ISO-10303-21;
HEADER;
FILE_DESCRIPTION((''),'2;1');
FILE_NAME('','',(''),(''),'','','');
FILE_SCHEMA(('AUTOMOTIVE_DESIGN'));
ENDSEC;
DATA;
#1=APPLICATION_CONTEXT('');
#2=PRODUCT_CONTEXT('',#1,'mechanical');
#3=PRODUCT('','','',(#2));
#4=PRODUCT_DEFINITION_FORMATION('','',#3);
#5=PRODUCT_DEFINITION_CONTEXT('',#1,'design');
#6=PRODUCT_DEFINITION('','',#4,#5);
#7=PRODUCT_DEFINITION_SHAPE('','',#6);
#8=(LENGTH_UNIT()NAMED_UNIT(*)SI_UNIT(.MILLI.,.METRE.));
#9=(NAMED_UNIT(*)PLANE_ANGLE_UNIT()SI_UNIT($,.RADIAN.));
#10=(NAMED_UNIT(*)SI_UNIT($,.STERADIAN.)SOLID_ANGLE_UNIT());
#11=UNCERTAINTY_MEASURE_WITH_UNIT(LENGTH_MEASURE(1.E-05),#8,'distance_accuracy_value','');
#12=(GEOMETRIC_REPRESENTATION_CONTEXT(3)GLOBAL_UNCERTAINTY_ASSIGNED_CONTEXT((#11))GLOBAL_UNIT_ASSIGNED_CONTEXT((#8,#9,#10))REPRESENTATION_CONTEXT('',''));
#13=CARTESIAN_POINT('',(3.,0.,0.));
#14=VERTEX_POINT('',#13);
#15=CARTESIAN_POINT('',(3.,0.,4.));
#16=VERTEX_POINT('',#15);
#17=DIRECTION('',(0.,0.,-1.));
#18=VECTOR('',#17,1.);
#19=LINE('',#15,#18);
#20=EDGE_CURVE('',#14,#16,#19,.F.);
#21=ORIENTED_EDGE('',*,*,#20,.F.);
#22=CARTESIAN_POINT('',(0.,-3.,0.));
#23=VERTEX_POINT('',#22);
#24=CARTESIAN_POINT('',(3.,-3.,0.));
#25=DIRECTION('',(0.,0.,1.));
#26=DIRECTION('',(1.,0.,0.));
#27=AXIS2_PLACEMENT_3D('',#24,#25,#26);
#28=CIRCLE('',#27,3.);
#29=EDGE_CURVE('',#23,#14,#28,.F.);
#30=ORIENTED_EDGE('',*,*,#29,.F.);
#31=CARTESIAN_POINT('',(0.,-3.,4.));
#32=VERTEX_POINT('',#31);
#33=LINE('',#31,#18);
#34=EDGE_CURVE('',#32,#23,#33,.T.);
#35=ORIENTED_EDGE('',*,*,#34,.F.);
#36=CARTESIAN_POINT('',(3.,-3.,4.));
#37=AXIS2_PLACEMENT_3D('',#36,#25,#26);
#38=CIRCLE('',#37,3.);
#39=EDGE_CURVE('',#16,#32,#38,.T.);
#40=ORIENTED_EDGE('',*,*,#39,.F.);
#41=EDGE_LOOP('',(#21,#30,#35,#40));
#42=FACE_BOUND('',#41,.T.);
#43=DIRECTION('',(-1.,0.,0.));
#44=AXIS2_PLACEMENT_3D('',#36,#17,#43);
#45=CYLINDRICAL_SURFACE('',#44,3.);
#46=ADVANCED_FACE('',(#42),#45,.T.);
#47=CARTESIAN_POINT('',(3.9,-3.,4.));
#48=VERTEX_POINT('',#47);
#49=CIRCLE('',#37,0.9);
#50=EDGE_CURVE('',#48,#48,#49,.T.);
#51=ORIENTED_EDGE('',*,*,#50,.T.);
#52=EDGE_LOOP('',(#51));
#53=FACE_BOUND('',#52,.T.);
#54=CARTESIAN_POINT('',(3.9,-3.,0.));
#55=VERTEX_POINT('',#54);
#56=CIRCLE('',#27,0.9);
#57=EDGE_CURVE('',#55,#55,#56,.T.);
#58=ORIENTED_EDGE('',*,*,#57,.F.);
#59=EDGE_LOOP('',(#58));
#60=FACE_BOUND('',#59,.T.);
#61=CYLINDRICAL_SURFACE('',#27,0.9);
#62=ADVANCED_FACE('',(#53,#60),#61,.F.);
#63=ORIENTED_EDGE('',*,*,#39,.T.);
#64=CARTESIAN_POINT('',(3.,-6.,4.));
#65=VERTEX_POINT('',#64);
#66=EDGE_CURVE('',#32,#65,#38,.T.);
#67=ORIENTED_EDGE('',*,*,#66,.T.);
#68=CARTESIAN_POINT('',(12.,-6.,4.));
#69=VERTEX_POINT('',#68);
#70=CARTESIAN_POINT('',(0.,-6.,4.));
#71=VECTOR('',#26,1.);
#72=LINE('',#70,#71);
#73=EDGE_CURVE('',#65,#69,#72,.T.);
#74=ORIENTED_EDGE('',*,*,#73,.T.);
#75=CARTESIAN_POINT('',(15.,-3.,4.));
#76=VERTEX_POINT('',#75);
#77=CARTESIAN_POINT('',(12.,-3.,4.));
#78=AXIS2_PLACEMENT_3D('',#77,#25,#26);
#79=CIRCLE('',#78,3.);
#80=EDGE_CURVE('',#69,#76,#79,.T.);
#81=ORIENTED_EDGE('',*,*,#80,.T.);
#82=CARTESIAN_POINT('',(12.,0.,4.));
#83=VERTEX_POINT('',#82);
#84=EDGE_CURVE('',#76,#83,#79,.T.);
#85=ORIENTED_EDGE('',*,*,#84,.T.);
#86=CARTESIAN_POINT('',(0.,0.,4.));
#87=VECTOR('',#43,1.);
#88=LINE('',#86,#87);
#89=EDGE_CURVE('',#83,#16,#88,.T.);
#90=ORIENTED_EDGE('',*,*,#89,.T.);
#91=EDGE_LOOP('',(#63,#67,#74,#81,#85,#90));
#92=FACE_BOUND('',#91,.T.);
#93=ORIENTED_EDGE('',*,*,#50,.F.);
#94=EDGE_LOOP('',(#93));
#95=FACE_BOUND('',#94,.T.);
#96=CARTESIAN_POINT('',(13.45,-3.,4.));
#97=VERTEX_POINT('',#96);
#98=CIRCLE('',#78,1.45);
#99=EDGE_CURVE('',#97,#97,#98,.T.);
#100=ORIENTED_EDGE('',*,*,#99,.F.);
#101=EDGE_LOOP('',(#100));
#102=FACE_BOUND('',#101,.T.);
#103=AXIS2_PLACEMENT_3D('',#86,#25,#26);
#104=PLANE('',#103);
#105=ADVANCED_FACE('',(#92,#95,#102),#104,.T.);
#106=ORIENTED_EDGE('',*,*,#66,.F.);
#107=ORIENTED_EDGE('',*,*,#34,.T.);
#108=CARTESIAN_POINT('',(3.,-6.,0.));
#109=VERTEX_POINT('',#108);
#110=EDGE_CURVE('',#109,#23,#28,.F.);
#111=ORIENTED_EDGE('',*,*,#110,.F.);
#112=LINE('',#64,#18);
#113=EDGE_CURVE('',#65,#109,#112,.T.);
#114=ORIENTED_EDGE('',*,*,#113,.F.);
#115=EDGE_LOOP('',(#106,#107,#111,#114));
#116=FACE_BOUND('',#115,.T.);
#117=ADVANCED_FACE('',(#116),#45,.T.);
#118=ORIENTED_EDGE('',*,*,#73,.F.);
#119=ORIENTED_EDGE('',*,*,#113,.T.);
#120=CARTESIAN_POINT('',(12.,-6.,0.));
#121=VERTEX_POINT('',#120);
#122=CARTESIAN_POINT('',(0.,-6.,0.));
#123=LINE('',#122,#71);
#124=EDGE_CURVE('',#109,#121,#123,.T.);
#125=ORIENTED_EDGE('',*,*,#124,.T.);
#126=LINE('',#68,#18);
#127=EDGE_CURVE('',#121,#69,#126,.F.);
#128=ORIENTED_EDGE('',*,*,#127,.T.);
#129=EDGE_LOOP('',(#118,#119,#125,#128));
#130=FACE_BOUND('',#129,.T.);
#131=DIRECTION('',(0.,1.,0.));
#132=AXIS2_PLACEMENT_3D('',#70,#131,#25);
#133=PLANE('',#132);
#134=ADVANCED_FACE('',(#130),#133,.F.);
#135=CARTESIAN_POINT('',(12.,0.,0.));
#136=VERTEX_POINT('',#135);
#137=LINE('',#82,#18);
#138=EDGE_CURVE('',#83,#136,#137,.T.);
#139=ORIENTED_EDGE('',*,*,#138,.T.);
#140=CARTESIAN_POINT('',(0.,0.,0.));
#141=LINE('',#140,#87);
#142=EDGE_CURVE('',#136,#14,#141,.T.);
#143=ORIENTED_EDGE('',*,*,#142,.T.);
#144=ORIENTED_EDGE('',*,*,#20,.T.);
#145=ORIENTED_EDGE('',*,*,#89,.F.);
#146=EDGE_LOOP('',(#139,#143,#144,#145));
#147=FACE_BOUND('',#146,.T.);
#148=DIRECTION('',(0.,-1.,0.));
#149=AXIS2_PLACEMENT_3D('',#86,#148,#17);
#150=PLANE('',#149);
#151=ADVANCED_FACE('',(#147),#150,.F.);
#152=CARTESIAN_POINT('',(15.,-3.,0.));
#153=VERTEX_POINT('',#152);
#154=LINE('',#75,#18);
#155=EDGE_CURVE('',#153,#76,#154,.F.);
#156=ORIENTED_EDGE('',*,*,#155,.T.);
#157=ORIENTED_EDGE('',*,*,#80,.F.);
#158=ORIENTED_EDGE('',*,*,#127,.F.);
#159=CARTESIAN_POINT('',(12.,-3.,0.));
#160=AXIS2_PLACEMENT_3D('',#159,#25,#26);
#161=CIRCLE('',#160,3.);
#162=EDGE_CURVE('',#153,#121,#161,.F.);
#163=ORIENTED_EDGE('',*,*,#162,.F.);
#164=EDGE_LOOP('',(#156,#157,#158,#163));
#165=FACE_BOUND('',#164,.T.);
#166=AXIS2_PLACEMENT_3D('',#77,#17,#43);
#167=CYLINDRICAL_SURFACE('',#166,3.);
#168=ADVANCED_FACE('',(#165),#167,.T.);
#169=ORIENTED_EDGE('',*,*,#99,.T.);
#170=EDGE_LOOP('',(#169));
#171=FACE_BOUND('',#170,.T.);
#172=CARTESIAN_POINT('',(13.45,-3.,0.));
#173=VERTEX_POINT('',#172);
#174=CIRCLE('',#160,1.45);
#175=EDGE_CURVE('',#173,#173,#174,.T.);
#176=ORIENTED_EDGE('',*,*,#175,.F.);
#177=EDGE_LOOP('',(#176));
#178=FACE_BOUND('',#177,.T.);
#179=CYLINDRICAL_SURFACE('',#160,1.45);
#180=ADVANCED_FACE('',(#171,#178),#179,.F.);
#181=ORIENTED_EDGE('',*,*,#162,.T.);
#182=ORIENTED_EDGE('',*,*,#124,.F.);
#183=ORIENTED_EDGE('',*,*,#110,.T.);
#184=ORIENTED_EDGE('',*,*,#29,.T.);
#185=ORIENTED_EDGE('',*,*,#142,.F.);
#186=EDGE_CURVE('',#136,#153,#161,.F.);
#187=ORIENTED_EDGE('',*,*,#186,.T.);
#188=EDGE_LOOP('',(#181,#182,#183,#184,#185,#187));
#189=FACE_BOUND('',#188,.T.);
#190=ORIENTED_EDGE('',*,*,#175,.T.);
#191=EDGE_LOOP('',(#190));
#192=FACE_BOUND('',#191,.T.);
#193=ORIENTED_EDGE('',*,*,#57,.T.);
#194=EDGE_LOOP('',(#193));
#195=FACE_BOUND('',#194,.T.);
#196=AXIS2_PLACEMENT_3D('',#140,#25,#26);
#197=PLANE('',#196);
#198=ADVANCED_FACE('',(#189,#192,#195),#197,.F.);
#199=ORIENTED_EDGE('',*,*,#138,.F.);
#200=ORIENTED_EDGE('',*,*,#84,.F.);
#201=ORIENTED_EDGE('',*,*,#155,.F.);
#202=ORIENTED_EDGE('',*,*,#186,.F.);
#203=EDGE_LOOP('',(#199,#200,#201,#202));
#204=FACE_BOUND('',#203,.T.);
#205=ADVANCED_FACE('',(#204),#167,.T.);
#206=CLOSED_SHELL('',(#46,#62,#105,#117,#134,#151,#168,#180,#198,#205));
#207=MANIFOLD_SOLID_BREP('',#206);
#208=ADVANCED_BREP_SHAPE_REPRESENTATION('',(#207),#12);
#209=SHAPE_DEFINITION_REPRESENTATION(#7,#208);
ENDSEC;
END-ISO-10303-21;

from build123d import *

# Parameters (mm, degrees)
SKETCH1_W               = 15
SKETCH1_H               = 6
BOSS_EXTRUDE1_DEPTH     = 4
CUT_EXTRUDE1_DEPTH      = 17.643316977
CUT_EXTRUDE1_DEPTH_BACK = 17.643316977
SKETCH2_R               = 0.9
SKETCH2_R_2             = 1.45
FILLET1_R               = 3


with BuildPart() as part:
    # Sketch1 → Boss-Extrude1 (new body)
    with BuildSketch(Plane.XY):
        with Locations((7.5, -3)):
            Rectangle(SKETCH1_W, SKETCH1_H)
    extrude(amount=BOSS_EXTRUDE1_DEPTH)

    # Sketch2 → Cut-Extrude1 (cut, two sides: drawn at the far end of the back side and taken through both)
    with BuildSketch(Plane.XY.offset(4).offset(-CUT_EXTRUDE1_DEPTH_BACK)):
        with Locations((3, -3)):
            Circle(SKETCH2_R)
        with Locations((12, -3)):
            Circle(SKETCH2_R_2)
    extrude(amount=CUT_EXTRUDE1_DEPTH + CUT_EXTRUDE1_DEPTH_BACK, mode=Mode.SUBTRACT)

    # Fillet1
    fillet1_edges = [part.edges().sort_by_distance(p)[0] for p in [
        (15, -6, 2),
        (15, 0, 2),
        (0, -6, 2),
        (0, 0, 2),
    ]]
    fillet(fillet1_edges, radius=FILLET1_R - 0.0001)  # a hair under: the kernel refuses the full size


solid = part.part
